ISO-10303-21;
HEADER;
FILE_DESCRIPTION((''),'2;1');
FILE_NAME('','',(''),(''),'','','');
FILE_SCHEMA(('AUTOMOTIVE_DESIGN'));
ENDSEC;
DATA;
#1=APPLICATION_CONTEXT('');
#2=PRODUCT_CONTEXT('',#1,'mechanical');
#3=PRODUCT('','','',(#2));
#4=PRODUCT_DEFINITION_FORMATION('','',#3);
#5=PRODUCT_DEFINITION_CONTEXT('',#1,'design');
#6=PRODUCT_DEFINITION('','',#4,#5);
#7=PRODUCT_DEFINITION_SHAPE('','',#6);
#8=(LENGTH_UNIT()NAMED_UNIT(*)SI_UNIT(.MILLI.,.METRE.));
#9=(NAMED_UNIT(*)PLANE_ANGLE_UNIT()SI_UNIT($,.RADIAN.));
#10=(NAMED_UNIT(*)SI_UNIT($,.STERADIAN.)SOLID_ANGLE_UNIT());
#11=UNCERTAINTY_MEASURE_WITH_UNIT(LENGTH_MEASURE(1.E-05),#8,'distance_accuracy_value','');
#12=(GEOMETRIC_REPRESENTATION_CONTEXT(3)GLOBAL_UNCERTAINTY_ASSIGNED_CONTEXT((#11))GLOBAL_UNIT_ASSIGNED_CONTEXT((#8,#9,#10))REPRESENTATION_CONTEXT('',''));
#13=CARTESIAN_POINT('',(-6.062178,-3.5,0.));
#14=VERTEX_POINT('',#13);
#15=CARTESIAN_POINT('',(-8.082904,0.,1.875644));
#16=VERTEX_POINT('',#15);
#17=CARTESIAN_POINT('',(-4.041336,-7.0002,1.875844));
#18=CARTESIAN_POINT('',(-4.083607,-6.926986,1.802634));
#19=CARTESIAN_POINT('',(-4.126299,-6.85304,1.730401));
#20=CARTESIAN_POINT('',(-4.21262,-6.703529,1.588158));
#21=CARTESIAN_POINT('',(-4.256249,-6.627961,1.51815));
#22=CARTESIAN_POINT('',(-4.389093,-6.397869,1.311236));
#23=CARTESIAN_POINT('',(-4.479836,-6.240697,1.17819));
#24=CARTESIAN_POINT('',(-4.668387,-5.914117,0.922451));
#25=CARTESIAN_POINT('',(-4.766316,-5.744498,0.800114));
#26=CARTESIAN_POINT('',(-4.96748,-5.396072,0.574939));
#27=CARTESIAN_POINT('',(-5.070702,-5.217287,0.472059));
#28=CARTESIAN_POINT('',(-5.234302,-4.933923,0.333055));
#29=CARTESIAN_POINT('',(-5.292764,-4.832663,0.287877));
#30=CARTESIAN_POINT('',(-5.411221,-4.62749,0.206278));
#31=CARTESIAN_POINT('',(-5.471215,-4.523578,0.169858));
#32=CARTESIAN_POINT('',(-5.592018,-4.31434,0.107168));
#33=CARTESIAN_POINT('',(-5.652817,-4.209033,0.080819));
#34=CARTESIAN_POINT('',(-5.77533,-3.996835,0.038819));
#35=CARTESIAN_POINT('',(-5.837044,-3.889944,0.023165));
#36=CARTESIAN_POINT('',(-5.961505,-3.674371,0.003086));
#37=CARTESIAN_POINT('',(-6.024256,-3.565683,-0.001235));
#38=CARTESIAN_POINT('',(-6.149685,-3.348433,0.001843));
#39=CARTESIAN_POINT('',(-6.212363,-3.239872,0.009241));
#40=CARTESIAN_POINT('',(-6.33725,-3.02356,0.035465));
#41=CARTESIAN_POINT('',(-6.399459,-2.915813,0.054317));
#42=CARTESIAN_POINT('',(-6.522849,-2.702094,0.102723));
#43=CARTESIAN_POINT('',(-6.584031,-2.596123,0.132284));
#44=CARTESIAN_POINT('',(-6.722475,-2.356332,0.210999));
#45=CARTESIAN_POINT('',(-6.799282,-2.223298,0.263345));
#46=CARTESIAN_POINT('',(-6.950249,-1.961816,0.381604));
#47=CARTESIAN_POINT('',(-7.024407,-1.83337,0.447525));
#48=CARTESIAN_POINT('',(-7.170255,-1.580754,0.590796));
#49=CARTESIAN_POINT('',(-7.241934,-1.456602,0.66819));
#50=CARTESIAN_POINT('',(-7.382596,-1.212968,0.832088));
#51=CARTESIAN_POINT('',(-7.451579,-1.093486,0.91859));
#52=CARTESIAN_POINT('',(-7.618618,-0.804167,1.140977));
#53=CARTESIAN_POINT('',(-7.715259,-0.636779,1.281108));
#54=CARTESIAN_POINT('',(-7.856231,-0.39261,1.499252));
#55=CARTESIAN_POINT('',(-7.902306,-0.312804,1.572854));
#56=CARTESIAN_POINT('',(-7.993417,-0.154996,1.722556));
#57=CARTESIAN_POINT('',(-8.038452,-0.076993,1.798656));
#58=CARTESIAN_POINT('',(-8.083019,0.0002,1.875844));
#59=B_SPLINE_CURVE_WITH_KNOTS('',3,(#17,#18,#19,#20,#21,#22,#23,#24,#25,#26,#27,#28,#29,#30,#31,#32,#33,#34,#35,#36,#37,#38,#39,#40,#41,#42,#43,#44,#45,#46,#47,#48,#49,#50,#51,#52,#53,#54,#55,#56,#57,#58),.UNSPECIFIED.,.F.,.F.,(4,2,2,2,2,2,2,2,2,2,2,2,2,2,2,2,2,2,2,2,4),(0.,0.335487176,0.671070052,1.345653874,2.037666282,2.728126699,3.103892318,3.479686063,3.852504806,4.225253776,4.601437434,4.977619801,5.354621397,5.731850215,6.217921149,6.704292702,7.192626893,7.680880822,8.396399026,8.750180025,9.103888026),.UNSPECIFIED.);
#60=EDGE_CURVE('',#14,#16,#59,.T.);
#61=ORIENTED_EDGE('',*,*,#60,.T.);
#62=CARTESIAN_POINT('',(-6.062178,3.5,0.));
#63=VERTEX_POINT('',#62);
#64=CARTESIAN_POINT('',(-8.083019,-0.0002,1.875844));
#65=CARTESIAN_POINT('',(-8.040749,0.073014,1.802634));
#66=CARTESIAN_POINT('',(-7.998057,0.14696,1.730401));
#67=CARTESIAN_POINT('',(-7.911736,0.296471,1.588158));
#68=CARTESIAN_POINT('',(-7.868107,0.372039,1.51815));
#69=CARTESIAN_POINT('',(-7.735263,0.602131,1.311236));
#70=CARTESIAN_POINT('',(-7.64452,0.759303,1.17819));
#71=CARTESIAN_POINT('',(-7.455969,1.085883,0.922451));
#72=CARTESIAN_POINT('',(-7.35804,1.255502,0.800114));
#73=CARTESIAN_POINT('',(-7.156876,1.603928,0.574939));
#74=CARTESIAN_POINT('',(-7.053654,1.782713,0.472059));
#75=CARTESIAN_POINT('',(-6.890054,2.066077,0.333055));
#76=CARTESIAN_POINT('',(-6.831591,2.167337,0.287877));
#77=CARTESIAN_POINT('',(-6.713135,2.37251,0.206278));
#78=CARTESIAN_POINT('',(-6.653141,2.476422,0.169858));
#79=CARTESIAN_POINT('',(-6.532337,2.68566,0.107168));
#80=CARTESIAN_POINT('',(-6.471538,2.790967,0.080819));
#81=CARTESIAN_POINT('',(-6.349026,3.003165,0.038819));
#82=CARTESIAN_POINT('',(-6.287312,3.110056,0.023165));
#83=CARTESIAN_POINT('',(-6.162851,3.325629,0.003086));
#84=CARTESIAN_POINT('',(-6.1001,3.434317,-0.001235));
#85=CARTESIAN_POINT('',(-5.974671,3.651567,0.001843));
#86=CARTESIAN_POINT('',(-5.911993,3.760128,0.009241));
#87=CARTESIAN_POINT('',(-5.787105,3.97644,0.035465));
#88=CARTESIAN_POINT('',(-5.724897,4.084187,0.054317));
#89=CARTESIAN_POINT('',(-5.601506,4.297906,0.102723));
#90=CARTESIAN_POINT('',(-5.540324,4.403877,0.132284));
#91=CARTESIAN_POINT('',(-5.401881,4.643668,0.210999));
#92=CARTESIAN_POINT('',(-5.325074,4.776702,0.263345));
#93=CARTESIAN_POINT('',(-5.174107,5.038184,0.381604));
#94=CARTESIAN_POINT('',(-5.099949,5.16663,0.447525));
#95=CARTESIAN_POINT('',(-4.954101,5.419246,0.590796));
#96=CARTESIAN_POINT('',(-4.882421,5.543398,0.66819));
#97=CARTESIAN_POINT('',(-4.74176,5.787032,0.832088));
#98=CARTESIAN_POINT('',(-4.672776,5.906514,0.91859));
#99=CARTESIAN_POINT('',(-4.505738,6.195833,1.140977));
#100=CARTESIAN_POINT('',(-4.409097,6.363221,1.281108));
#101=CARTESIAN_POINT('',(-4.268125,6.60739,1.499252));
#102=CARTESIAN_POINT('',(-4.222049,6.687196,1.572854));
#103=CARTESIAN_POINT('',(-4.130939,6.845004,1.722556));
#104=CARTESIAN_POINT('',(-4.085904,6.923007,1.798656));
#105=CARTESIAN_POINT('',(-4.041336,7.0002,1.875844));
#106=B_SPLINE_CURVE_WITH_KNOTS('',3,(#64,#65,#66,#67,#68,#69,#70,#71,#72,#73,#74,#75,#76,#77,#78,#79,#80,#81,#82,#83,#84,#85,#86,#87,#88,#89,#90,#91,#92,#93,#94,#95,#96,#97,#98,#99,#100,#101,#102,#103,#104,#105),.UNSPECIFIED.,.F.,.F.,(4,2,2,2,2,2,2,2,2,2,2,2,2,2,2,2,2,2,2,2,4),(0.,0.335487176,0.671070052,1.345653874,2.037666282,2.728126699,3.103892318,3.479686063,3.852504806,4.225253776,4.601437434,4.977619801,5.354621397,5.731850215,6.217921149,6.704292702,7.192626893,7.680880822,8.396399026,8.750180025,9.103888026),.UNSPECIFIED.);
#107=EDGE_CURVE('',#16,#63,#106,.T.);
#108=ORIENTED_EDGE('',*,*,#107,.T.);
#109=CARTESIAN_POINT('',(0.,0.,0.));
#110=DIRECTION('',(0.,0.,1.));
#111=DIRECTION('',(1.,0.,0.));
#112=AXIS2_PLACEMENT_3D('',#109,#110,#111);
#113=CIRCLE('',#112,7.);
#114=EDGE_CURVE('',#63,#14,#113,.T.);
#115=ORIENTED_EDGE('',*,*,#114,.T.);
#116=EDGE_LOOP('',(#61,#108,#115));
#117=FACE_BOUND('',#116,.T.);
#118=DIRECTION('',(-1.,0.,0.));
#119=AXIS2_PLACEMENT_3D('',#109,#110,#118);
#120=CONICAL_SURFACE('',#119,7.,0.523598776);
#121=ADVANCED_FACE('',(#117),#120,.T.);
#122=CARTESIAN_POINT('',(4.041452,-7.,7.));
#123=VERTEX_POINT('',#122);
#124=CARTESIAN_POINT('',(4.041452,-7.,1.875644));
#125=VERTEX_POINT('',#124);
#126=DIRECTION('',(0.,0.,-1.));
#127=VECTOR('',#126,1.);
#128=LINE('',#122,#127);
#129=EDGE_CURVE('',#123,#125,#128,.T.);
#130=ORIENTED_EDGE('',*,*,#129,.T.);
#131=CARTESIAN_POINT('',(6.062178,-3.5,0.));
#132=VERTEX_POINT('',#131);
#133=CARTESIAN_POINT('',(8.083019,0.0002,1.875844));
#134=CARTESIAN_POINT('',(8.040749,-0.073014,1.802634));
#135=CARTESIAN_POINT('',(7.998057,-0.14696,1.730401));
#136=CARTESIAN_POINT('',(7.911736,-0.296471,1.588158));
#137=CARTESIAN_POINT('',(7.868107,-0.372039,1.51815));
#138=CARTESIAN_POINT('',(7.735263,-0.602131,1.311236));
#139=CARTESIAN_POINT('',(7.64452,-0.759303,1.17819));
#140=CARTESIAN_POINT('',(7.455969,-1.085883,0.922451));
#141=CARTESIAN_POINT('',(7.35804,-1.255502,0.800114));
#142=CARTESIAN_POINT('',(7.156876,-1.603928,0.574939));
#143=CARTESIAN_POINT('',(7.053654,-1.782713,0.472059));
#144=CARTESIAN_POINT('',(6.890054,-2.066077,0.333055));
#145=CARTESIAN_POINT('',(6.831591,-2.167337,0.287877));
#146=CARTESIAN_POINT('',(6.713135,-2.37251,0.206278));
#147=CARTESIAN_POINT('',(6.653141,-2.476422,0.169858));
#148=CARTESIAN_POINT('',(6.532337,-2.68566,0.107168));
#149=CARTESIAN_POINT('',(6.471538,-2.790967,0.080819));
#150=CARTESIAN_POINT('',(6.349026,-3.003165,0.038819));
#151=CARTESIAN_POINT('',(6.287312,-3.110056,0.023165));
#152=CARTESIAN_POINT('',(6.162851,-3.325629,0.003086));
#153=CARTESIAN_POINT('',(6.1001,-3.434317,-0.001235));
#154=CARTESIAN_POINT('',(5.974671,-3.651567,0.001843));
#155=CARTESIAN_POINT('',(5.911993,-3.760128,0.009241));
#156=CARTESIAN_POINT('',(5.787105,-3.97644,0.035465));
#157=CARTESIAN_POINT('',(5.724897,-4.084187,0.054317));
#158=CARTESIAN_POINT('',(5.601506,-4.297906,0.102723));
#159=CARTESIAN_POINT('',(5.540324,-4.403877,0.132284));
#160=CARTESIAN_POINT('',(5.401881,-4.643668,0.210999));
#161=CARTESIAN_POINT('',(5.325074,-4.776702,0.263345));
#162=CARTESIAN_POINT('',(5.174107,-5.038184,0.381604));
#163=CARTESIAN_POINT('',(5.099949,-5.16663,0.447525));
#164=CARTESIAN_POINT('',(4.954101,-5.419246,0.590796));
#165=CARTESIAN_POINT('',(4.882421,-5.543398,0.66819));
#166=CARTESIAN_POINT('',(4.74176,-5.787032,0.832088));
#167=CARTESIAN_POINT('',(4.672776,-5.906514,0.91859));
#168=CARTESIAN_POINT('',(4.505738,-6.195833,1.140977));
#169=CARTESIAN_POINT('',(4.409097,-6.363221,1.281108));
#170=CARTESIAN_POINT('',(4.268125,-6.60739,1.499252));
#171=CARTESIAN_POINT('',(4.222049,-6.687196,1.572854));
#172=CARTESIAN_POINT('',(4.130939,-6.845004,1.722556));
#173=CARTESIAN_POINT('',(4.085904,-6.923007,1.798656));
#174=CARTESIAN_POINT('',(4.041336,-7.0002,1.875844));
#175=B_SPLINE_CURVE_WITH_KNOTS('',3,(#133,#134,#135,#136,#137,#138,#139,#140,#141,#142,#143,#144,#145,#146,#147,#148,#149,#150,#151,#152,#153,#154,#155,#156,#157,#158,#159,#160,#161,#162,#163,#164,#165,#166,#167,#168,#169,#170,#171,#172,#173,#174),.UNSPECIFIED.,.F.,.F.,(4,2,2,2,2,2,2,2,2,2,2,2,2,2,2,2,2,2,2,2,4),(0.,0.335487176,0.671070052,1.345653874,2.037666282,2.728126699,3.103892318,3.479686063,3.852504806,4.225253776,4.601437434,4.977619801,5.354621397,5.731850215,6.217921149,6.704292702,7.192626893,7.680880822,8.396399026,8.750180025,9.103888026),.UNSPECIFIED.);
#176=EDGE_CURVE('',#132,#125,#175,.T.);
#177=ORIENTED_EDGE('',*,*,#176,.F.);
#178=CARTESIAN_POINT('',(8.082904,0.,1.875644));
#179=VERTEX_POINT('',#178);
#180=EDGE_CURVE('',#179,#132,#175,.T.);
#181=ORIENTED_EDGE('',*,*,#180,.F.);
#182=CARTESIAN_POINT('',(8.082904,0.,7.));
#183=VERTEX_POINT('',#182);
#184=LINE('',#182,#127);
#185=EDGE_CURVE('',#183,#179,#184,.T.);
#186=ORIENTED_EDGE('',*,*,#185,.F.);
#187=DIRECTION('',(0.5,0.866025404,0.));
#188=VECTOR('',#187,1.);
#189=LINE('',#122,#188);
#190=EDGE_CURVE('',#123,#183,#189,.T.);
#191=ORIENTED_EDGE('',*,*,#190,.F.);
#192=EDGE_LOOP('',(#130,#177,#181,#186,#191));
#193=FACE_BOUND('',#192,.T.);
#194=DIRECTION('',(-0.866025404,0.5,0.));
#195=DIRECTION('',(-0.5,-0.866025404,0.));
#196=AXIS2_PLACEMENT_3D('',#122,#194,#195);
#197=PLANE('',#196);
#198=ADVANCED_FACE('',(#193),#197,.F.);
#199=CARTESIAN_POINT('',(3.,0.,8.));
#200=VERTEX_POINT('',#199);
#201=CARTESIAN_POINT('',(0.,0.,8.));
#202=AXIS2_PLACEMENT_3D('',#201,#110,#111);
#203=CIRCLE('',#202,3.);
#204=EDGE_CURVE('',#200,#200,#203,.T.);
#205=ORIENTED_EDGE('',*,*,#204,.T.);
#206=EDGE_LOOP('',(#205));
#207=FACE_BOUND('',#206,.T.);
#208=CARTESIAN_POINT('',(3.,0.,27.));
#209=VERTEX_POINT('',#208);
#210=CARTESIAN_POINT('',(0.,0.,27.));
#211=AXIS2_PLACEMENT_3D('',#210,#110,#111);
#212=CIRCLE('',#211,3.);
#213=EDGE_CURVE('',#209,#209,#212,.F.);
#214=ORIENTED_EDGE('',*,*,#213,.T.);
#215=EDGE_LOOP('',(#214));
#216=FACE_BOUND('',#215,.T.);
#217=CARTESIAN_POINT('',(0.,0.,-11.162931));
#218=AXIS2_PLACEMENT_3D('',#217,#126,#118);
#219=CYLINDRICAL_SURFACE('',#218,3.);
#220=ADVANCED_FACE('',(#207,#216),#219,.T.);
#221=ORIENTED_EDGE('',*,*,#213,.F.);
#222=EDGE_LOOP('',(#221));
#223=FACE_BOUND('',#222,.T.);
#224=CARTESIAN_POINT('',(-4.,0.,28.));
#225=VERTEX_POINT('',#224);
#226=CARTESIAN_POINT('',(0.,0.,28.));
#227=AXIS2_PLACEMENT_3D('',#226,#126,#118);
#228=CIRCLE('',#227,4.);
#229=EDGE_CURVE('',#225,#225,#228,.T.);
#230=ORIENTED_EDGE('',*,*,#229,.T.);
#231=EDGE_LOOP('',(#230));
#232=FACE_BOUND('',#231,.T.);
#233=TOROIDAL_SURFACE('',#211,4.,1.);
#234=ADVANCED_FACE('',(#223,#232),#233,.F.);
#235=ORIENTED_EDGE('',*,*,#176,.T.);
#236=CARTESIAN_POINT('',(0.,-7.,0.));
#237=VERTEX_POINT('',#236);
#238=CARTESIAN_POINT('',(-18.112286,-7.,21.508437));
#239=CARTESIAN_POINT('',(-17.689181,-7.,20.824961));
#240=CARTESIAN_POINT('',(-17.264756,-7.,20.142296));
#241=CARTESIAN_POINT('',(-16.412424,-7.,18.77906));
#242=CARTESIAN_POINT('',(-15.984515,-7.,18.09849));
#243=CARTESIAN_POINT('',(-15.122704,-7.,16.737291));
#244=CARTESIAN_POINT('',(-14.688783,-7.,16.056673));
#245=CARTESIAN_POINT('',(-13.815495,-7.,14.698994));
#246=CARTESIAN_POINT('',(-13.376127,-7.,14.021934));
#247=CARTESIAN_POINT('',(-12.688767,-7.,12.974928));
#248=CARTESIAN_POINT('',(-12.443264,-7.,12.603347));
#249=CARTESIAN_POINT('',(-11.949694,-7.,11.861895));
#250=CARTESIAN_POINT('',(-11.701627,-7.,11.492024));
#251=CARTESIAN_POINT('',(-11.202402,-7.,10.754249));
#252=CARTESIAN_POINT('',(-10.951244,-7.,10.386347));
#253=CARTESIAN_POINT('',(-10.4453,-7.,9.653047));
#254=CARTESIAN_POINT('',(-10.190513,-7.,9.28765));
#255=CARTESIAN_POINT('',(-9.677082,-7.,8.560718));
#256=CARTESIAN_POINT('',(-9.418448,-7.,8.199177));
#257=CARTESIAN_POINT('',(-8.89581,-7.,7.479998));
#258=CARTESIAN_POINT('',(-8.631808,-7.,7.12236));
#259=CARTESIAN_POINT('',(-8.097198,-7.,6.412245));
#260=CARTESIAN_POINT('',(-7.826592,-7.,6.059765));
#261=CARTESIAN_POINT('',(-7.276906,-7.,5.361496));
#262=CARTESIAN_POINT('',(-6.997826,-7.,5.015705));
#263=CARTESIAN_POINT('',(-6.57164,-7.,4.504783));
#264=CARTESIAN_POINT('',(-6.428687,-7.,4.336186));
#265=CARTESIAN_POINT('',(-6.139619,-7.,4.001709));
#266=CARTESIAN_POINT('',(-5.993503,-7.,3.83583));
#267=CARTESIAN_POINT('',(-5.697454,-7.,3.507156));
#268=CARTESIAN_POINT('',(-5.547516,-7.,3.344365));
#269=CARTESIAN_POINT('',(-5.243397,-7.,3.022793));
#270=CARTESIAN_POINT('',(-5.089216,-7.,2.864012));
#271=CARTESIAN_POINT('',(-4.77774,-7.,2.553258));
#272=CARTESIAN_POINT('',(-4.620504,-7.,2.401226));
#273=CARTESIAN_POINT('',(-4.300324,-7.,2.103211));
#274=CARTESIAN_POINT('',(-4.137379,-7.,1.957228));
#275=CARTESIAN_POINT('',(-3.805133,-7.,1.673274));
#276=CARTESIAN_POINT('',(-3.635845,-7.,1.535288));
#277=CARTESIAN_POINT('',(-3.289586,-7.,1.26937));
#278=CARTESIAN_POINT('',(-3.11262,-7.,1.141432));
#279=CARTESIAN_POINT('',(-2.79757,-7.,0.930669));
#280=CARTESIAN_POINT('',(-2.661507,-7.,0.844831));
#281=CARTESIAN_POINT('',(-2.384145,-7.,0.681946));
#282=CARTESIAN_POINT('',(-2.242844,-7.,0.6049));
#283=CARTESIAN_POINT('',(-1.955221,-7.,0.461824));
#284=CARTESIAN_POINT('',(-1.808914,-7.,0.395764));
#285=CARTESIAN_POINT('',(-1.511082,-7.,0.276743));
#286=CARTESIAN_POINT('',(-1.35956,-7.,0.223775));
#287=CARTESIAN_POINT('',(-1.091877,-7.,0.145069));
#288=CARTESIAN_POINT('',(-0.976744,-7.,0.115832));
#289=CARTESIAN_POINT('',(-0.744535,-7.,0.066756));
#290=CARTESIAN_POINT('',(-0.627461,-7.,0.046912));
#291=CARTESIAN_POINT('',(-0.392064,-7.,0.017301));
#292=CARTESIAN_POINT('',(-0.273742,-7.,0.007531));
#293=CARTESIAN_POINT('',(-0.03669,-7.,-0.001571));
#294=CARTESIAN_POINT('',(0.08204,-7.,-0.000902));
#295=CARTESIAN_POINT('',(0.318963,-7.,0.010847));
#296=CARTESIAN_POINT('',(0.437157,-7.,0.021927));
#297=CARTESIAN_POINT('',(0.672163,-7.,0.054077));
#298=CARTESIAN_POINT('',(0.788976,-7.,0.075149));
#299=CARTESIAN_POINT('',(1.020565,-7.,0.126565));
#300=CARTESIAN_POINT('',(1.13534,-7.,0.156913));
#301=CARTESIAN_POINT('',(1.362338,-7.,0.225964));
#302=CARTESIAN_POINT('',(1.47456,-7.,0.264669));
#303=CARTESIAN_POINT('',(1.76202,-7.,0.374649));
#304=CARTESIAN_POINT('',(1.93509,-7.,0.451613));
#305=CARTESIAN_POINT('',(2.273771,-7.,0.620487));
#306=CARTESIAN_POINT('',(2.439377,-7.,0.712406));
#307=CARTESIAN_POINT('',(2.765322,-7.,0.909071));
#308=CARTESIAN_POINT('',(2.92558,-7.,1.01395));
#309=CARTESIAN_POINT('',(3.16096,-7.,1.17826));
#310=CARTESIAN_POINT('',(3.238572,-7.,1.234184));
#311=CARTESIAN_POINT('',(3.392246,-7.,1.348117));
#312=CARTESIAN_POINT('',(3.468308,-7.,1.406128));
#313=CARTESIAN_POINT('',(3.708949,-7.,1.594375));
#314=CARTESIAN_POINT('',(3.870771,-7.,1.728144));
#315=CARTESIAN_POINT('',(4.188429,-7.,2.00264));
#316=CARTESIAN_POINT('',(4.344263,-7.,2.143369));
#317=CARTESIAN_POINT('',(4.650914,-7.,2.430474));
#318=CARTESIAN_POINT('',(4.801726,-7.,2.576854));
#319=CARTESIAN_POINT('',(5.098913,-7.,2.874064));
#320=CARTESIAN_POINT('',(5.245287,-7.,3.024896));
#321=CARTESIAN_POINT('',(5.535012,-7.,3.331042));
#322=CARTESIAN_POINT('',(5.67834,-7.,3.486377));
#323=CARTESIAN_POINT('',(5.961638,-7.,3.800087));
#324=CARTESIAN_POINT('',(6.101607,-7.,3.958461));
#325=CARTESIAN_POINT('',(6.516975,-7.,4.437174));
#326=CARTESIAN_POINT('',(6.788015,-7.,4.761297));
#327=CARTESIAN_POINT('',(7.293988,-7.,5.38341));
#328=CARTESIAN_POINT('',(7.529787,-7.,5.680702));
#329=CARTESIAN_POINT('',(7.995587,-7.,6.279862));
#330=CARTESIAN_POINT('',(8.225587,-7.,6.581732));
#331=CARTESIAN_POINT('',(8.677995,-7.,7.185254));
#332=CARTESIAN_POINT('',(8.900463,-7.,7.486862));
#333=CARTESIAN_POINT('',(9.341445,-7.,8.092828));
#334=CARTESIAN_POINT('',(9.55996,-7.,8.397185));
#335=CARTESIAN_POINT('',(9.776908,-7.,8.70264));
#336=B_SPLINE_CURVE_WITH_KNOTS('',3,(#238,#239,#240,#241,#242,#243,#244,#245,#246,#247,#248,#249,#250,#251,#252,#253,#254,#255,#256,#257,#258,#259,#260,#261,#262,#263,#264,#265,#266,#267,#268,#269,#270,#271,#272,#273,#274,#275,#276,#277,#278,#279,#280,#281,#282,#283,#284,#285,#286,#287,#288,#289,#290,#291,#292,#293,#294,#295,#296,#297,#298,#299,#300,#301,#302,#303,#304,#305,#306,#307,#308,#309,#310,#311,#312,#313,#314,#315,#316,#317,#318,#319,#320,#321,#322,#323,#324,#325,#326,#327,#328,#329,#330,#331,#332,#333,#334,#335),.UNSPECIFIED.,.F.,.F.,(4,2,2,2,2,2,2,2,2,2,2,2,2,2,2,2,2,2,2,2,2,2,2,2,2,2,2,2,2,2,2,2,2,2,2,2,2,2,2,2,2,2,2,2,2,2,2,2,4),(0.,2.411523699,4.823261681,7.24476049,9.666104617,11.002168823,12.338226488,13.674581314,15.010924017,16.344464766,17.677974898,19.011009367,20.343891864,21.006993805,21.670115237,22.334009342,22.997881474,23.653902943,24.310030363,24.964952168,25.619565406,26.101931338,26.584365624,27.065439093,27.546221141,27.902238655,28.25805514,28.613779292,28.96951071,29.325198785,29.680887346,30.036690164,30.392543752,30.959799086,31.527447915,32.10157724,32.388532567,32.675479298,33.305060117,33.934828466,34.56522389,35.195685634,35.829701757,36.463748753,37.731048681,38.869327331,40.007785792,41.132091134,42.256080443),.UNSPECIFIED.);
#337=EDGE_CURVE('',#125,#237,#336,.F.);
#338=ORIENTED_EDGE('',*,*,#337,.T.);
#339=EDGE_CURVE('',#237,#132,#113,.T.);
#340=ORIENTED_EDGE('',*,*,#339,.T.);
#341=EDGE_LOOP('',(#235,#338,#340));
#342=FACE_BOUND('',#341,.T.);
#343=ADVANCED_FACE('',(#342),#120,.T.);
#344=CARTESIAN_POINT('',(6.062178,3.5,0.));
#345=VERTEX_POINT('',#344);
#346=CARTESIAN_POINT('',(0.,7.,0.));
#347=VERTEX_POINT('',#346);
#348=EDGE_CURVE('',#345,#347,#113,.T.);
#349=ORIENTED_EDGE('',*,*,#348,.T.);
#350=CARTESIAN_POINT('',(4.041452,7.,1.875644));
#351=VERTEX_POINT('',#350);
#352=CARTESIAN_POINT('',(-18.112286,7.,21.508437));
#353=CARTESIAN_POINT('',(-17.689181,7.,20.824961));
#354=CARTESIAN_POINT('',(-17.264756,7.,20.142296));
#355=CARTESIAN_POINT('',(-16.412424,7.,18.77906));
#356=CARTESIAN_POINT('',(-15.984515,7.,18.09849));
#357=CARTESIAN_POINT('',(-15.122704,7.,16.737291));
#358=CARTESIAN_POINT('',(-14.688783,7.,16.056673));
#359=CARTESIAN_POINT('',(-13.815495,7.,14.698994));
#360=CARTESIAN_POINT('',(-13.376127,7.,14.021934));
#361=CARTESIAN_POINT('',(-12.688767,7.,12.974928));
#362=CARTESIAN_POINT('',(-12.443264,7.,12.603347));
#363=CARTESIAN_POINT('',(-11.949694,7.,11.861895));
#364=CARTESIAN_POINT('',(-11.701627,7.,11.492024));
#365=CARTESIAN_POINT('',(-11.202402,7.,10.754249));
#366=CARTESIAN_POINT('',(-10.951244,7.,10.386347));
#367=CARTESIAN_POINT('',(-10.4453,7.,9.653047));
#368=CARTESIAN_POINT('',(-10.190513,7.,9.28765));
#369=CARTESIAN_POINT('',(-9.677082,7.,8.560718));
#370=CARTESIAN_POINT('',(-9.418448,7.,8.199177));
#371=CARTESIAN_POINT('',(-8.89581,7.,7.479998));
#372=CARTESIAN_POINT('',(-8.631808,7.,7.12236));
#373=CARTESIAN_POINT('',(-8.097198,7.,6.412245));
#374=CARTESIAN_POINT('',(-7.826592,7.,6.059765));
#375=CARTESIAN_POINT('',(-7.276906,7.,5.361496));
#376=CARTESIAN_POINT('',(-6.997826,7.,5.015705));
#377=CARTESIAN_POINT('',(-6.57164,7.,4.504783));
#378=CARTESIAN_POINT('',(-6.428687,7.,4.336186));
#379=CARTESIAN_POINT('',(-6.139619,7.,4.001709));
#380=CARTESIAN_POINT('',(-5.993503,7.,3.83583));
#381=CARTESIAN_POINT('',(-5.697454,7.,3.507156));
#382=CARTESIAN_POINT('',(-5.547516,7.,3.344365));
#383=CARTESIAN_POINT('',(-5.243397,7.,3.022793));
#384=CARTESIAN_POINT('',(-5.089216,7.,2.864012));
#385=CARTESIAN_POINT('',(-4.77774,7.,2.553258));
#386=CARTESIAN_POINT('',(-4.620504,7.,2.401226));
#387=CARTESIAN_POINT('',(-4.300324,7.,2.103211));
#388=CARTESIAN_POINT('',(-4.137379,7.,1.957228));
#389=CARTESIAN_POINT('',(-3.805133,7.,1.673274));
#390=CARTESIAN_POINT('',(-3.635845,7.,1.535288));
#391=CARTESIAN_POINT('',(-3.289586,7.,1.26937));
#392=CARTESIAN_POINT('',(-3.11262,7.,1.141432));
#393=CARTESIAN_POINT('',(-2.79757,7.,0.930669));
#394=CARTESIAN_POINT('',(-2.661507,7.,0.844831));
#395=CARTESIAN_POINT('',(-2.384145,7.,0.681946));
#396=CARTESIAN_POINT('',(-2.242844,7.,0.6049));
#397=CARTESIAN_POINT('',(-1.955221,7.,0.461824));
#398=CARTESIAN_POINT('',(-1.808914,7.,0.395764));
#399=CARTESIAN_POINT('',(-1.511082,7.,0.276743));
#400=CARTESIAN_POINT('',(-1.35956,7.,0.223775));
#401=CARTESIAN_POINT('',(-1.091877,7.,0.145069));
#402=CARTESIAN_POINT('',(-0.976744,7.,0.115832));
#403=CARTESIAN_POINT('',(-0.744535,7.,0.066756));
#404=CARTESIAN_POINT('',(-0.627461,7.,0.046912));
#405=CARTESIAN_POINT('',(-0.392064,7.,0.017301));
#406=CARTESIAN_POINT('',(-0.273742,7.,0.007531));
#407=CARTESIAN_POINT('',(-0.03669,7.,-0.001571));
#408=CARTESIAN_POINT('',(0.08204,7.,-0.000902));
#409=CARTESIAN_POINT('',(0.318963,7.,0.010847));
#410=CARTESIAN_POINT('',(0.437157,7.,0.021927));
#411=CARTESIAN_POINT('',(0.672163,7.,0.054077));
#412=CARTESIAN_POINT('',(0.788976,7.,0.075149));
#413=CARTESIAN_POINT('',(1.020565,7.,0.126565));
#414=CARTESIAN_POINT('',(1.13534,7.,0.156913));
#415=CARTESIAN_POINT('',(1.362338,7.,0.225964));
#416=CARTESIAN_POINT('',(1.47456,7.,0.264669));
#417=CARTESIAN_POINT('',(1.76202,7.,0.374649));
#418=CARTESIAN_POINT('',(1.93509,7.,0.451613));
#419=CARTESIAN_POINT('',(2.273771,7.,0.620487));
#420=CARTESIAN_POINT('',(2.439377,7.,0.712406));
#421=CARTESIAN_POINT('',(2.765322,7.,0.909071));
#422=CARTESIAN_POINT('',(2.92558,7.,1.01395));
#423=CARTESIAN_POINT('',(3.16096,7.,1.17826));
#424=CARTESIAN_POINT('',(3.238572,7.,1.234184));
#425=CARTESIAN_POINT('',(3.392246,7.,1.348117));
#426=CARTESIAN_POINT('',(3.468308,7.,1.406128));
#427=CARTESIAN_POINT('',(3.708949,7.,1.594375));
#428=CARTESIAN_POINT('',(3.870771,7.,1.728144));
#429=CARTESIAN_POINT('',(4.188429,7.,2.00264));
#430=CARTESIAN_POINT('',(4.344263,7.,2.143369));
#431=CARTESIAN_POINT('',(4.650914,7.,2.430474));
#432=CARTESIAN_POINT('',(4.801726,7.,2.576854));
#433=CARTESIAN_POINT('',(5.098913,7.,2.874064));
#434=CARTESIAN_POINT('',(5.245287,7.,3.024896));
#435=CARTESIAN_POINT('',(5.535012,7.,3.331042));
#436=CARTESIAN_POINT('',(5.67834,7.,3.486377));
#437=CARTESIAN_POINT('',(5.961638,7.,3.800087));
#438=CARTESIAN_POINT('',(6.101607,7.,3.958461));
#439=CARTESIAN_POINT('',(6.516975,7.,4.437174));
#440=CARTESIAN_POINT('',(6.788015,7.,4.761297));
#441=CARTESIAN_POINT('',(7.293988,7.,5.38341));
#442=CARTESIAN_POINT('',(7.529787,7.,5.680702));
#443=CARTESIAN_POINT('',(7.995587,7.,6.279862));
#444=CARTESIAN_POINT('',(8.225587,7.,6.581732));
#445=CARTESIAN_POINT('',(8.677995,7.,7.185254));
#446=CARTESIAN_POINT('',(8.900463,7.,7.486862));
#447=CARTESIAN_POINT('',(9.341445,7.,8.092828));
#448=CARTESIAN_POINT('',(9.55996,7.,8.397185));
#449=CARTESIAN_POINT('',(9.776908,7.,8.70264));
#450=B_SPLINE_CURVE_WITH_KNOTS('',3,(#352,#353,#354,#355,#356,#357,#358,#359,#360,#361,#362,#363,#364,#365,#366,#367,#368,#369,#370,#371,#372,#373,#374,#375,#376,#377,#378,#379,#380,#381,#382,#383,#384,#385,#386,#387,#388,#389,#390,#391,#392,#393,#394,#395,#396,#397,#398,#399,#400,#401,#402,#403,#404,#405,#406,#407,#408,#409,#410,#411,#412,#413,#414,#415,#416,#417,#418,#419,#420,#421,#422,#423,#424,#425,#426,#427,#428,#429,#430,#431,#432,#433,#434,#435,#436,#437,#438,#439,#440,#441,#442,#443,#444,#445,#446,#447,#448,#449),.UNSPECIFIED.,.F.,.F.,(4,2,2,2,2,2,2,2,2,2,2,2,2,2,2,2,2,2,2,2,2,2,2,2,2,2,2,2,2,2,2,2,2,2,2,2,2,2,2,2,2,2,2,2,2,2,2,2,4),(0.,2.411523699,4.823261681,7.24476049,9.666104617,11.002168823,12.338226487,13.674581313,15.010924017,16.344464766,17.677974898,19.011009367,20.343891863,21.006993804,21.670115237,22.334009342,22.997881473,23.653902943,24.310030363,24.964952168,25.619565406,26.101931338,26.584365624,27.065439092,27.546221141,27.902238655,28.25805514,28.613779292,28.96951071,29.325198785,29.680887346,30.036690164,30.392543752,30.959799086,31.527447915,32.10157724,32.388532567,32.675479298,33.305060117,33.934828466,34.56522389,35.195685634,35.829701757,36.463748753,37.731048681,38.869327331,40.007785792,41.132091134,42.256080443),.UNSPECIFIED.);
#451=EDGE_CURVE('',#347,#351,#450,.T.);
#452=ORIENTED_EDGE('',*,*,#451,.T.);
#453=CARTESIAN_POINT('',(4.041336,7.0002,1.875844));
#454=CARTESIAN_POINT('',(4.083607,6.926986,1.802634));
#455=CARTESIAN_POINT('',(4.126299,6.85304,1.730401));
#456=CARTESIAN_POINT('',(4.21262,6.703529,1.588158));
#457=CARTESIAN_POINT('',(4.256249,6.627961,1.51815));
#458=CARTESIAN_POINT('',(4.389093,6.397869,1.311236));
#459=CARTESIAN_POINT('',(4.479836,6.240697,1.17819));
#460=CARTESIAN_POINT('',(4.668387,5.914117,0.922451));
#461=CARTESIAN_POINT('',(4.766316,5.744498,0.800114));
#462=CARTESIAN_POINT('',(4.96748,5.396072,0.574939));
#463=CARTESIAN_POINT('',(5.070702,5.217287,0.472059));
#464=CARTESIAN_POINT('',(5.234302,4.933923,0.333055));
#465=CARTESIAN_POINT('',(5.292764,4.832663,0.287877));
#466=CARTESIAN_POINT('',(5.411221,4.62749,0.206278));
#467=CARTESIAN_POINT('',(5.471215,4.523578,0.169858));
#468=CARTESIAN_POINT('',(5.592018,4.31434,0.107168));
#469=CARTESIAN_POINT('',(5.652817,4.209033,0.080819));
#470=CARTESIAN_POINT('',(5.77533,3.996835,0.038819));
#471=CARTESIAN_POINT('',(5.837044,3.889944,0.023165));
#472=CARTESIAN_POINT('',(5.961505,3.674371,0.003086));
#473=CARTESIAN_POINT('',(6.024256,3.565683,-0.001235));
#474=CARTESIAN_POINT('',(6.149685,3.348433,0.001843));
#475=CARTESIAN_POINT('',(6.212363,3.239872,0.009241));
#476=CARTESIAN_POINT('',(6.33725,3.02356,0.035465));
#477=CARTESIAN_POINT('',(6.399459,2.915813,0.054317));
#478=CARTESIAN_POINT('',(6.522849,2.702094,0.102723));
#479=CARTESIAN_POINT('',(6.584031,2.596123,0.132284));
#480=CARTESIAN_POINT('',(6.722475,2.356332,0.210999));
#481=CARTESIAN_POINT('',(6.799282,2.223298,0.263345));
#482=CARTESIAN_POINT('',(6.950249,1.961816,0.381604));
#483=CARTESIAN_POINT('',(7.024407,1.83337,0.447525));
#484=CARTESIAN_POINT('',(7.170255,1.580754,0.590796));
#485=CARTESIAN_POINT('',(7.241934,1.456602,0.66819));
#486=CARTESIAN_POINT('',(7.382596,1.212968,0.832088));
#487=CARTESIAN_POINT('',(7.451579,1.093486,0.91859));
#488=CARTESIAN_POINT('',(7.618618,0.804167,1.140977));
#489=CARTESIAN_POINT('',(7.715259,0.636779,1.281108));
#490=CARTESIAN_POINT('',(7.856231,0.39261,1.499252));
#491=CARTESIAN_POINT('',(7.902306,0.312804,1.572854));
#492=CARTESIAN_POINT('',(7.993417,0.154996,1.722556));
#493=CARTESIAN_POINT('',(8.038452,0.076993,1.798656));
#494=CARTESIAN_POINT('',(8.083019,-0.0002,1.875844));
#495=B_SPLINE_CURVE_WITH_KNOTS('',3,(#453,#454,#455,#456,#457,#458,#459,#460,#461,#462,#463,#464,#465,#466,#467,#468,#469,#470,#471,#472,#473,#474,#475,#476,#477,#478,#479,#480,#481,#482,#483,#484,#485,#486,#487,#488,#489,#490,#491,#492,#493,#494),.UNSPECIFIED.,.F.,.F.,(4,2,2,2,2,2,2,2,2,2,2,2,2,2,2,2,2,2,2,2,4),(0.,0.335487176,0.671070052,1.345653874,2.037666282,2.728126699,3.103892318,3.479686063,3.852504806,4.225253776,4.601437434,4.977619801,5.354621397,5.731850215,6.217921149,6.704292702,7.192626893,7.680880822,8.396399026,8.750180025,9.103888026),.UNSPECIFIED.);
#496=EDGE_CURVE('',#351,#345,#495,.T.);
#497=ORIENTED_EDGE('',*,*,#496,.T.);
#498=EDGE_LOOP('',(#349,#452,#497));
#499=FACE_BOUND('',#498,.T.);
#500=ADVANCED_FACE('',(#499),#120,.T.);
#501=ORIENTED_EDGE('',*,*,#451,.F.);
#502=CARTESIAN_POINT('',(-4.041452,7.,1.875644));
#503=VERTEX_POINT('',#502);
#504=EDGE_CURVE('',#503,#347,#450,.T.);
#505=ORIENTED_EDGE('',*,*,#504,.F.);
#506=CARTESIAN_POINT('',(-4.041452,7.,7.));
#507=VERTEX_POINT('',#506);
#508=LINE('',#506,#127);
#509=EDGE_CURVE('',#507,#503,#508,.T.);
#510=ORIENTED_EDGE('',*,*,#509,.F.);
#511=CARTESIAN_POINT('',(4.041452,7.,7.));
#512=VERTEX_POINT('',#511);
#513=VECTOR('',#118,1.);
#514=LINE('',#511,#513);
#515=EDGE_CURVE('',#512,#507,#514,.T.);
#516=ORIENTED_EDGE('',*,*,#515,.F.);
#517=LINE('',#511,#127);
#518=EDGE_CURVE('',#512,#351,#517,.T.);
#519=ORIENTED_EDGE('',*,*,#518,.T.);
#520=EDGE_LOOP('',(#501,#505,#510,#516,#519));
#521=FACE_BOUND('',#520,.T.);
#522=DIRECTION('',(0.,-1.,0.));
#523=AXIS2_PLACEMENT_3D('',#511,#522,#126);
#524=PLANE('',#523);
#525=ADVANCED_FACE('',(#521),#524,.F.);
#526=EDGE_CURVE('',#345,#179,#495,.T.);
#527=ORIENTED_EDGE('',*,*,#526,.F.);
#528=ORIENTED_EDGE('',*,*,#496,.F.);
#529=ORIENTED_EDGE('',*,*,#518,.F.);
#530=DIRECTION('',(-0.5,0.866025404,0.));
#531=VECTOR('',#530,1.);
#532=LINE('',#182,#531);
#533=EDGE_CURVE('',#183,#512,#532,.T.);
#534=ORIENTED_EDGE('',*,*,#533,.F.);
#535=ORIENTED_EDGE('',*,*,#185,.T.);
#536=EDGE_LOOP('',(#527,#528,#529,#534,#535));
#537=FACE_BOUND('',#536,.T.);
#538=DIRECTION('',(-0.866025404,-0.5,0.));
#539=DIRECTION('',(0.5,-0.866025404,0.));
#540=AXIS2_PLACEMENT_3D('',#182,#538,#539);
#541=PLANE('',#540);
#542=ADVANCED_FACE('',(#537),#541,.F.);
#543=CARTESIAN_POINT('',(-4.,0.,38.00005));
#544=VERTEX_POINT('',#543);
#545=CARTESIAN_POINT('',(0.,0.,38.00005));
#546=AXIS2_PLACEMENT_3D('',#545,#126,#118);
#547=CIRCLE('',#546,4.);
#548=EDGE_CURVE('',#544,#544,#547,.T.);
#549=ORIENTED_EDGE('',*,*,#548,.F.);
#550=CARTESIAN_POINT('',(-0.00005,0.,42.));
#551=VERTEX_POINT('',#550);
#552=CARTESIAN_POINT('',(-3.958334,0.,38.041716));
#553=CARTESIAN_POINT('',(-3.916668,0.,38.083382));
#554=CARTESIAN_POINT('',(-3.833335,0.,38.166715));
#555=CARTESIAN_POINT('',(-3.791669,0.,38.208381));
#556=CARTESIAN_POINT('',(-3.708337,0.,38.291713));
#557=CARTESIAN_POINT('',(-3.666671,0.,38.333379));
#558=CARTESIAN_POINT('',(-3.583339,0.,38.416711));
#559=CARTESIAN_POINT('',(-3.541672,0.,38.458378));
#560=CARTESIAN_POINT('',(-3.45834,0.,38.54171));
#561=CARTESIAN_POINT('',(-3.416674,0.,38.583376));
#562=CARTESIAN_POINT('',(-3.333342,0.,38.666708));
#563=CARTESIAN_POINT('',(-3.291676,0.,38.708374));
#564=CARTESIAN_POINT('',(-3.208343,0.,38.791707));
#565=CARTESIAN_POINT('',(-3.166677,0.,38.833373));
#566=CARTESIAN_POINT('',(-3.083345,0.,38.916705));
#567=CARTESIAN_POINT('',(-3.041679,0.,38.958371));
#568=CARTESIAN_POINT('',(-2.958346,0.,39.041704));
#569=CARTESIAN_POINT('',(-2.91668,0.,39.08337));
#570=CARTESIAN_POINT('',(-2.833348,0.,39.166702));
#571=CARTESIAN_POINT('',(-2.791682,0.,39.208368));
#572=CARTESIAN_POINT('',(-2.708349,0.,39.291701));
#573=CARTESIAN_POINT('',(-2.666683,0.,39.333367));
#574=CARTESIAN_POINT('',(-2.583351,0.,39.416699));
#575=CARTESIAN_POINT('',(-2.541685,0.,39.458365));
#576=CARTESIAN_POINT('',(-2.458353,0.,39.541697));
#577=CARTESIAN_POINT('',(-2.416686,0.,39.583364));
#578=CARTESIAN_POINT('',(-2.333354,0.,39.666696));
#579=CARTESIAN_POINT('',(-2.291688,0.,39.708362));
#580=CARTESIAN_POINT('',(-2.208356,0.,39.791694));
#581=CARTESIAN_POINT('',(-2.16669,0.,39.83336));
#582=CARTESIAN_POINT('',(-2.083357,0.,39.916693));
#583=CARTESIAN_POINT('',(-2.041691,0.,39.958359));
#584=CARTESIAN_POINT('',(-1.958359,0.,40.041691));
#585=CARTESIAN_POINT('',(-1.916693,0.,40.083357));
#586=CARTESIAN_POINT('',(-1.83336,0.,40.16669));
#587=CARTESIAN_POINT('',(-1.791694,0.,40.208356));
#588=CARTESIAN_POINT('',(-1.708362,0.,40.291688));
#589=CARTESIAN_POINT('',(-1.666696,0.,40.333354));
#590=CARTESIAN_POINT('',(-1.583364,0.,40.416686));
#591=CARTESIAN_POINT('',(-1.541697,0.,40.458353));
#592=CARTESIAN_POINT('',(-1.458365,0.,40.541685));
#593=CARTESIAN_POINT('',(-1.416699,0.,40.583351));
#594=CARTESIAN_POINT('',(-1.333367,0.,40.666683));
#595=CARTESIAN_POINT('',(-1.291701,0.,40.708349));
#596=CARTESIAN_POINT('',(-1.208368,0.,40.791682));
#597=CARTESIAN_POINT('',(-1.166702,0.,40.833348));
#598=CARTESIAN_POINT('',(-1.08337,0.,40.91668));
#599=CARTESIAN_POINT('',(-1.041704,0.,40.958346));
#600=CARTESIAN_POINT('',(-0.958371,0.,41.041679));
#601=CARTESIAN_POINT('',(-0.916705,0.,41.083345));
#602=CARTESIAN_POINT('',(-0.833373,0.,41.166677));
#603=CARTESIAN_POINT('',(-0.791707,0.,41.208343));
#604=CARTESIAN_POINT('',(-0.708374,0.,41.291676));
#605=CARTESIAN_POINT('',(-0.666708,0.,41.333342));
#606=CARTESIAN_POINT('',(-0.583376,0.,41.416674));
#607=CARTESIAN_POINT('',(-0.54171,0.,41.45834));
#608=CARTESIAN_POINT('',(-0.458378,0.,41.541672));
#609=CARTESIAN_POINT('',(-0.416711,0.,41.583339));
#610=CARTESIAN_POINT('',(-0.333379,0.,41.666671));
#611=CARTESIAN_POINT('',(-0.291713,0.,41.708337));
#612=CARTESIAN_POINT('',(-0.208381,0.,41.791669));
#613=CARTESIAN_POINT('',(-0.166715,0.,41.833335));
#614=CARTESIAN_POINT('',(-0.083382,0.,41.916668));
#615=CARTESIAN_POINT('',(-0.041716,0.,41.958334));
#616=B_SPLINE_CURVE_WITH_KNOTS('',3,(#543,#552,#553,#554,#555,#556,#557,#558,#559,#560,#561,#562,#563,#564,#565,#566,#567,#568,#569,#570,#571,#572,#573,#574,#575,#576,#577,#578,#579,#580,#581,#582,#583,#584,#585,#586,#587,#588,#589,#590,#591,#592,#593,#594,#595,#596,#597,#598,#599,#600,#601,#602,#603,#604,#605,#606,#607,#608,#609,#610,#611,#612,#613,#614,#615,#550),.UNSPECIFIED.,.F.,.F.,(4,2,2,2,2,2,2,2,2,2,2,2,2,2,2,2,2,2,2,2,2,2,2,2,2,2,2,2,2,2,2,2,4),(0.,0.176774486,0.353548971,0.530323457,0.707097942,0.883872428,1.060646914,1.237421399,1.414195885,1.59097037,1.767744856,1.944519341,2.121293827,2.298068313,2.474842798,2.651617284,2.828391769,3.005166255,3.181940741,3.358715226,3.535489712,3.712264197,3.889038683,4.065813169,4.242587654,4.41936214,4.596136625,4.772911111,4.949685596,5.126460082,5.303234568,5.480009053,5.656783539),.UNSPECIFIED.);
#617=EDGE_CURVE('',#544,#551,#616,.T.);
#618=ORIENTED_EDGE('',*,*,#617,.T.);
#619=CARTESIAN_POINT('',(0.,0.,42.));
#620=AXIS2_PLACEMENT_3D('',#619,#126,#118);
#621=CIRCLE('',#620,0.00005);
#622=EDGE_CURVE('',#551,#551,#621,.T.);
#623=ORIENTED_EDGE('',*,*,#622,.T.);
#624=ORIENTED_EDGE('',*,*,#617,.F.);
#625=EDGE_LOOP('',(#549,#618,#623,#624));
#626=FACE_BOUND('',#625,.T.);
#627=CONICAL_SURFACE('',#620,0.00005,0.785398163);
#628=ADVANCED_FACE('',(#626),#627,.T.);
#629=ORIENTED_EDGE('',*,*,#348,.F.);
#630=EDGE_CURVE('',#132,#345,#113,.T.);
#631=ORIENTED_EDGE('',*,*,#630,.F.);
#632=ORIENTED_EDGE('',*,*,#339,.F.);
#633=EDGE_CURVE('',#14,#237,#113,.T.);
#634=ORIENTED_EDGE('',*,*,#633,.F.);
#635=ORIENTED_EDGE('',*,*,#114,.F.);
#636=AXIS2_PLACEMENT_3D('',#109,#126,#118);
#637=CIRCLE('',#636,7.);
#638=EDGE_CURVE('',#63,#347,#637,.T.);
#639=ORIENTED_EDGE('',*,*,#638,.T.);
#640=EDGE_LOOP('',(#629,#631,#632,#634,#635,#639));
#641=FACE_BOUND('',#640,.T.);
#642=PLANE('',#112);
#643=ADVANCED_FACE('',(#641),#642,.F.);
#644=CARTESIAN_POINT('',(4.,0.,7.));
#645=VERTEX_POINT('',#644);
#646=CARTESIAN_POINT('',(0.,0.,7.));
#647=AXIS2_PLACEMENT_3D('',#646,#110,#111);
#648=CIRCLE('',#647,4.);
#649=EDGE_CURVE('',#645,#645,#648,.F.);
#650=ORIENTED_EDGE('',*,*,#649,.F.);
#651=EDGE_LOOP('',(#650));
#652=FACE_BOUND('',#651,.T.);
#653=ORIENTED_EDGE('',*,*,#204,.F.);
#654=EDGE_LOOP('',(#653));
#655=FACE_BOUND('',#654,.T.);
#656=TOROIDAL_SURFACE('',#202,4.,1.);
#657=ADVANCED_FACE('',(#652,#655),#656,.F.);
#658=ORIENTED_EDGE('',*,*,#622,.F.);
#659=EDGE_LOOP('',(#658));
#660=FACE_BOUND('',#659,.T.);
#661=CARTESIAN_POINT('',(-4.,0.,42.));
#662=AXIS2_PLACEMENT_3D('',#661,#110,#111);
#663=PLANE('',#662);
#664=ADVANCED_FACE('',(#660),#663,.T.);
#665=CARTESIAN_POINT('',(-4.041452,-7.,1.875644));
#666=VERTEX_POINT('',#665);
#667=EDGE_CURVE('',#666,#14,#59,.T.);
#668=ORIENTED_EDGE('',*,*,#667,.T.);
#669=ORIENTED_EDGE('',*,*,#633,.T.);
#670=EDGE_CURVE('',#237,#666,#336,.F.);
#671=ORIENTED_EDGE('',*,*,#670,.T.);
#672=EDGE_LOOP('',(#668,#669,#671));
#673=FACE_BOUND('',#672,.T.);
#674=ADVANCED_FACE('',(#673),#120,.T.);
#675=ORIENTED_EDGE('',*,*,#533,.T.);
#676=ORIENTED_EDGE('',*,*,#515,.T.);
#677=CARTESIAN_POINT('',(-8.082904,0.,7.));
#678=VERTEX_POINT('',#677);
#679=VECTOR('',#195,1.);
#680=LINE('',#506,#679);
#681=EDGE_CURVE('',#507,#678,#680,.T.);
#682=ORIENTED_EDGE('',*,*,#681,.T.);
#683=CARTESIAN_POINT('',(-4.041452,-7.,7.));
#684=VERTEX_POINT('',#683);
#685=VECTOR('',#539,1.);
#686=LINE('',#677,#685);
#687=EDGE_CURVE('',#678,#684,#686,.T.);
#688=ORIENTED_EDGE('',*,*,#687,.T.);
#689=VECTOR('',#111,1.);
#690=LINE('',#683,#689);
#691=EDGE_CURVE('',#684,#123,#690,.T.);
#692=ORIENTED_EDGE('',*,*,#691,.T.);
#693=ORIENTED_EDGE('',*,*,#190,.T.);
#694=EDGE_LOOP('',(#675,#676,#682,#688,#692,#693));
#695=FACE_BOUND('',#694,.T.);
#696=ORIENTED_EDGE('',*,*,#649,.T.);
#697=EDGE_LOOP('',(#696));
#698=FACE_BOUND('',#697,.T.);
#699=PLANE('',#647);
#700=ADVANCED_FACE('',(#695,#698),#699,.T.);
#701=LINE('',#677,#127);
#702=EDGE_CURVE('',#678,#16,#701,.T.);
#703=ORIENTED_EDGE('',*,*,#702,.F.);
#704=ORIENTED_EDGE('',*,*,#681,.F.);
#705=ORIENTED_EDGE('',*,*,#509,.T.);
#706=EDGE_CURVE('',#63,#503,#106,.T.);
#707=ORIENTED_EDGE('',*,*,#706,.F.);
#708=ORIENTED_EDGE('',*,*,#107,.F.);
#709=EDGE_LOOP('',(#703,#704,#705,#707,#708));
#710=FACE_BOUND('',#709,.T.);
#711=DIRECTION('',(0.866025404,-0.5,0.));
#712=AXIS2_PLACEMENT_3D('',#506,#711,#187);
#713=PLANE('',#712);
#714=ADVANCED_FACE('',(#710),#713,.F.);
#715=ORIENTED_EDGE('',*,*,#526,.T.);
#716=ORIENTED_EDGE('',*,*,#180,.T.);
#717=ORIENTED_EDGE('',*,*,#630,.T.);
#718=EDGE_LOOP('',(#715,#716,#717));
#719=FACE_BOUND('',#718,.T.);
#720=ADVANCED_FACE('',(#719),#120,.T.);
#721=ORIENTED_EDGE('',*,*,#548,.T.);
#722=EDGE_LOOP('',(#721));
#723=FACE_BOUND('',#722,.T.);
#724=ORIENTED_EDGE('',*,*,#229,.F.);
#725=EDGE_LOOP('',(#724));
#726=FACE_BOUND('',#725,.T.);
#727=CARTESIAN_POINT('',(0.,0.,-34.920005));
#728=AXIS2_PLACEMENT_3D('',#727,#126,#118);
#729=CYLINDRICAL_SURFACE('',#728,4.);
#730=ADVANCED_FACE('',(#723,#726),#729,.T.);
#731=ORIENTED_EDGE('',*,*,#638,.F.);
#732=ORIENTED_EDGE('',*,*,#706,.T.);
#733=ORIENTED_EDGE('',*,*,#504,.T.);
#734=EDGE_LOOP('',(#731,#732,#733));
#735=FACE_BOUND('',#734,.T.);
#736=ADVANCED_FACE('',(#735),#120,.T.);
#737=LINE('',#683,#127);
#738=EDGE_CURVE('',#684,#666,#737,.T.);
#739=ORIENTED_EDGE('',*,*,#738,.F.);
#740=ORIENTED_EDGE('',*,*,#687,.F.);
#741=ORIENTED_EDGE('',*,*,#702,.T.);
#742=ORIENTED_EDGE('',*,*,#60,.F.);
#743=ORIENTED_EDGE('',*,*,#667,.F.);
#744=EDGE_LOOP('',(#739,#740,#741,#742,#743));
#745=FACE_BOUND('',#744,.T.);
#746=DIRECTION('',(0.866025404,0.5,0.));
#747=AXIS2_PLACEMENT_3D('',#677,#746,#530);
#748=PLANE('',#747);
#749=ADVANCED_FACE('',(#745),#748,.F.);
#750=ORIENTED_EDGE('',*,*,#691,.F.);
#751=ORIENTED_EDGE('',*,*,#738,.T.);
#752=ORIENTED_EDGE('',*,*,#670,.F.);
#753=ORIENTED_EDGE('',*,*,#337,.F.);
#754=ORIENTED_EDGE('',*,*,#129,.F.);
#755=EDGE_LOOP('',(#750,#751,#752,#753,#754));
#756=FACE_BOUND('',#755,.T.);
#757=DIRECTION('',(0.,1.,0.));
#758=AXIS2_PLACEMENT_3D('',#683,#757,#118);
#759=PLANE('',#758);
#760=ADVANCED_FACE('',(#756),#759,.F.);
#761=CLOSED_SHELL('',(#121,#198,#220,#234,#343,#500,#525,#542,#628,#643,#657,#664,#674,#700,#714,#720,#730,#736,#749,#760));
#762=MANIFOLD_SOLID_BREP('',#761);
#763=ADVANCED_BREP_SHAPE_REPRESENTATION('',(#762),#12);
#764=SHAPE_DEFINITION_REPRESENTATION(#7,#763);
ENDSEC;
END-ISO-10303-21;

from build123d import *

# Parameters (mm, degrees)
BOSS_EXTRUDE1_DEPTH = 7
SKETCH2_W           = 4
SKETCH2_H           = 35
SKETCH3_W           = 1
SKETCH3_H           = 21
FILLET1_R           = 1
SKETCH6_OUTSIDE_W   = 78.792
SKETCH6_OUTSIDE_H   = 76.626
SKETCH6_OUTSIDE_R   = 7
CUT_EXTRUDE1_DEPTH  = 44.339743116
CUT_EXTRUDE1_DRAFT  = -30


with BuildPart() as part:
    # Sketch1 → Boss-Extrude1 (new body)
    with BuildSketch(Plane.XY):
        Polygon((4.041451884, 7), (-4.041451884, 7), (-8.082903769, 0), (-4.041451884, -7), (4.041451884, -7), (8.082903769, 0), align=None)
    extrude(amount=BOSS_EXTRUDE1_DEPTH)

    # Sketch2 → Revolve1 (revolve)
    with BuildSketch(Plane(origin=(0, 0, 0), x_dir=(1, 0, 0), z_dir=(0, 1, 0))):
        with Locations((-2, -24.5)):
            Rectangle(SKETCH2_W, SKETCH2_H)
    revolve(axis=Axis((0, 0, -34.920005339), (0, 0, 1)))

    # Sketch3 → Cut-Revolve1 (revolve, cut)
    with BuildSketch(Plane(origin=(0, 0, 0), x_dir=(1, 0, 0), z_dir=(0, 1, 0))):
        with Locations((-3.5, -17.5)):
            Rectangle(SKETCH3_W, SKETCH3_H)
    revolve(axis=Axis((0, 0, -11.162931032), (0, 0, 1)), mode=Mode.SUBTRACT)

    # Sketch5 → Cut-Revolve11 (revolve, cut)
    with BuildSketch(Plane(origin=(0, 0, 0), x_dir=(1, 0, 0), z_dir=(0, 1, 0))):
        Polygon((-5e-05, -42), (-4, -38.00005), (-4, -42), align=None)
    revolve(axis=Axis((0, 0, -15.823423108), (0, 0, 1)), mode=Mode.SUBTRACT)

    # Fillet1
    fillet1_edges = [part.edges().sort_by_distance(p)[0] for p in [
        (3, 0, 28),
        (3, 0, 7),
    ]]
    fillet(fillet1_edges, radius=FILLET1_R - 0.0001)  # a hair under: the kernel refuses the full size


with BuildPart() as cut_extrude1_tool:
    # Sketch6 outside → Cut-Extrude1 (with draft: the straight prism first)
    with BuildSketch(Plane(origin=(0, 0, 0), x_dir=(-1, 0, 0), z_dir=(0, 0, -1))):
        Rectangle(SKETCH6_OUTSIDE_W, SKETCH6_OUTSIDE_H)
        Circle(SKETCH6_OUTSIDE_R, mode=Mode.SUBTRACT)
    extrude(amount=-CUT_EXTRUDE1_DEPTH)
    # Cut-Extrude1: the draft: its side faces are tilted about the plane it starts from
    cut_extrude1_sides = [cut_extrude1_tool.faces().sort_by_distance(p)[0] for p in [
        (0, -38.313, 22.169871558),
        (-39.396, 0, 22.169871558),
        (0, 38.313, 22.169871558),
        (39.396, 0, 22.169871558),
        (7, 0, 22.169871558),
    ]]
    draft(cut_extrude1_sides, Plane(origin=(0, 0, 0), x_dir=(-1, 0, 0), z_dir=(0, 0, -1)), CUT_EXTRUDE1_DRAFT)


with BuildPart() as part_1:
    add(part.part)

    # Cut-Extrude1: cut by cut_extrude1_tool
    add(cut_extrude1_tool.part, mode=Mode.SUBTRACT)


solid = part_1.part
